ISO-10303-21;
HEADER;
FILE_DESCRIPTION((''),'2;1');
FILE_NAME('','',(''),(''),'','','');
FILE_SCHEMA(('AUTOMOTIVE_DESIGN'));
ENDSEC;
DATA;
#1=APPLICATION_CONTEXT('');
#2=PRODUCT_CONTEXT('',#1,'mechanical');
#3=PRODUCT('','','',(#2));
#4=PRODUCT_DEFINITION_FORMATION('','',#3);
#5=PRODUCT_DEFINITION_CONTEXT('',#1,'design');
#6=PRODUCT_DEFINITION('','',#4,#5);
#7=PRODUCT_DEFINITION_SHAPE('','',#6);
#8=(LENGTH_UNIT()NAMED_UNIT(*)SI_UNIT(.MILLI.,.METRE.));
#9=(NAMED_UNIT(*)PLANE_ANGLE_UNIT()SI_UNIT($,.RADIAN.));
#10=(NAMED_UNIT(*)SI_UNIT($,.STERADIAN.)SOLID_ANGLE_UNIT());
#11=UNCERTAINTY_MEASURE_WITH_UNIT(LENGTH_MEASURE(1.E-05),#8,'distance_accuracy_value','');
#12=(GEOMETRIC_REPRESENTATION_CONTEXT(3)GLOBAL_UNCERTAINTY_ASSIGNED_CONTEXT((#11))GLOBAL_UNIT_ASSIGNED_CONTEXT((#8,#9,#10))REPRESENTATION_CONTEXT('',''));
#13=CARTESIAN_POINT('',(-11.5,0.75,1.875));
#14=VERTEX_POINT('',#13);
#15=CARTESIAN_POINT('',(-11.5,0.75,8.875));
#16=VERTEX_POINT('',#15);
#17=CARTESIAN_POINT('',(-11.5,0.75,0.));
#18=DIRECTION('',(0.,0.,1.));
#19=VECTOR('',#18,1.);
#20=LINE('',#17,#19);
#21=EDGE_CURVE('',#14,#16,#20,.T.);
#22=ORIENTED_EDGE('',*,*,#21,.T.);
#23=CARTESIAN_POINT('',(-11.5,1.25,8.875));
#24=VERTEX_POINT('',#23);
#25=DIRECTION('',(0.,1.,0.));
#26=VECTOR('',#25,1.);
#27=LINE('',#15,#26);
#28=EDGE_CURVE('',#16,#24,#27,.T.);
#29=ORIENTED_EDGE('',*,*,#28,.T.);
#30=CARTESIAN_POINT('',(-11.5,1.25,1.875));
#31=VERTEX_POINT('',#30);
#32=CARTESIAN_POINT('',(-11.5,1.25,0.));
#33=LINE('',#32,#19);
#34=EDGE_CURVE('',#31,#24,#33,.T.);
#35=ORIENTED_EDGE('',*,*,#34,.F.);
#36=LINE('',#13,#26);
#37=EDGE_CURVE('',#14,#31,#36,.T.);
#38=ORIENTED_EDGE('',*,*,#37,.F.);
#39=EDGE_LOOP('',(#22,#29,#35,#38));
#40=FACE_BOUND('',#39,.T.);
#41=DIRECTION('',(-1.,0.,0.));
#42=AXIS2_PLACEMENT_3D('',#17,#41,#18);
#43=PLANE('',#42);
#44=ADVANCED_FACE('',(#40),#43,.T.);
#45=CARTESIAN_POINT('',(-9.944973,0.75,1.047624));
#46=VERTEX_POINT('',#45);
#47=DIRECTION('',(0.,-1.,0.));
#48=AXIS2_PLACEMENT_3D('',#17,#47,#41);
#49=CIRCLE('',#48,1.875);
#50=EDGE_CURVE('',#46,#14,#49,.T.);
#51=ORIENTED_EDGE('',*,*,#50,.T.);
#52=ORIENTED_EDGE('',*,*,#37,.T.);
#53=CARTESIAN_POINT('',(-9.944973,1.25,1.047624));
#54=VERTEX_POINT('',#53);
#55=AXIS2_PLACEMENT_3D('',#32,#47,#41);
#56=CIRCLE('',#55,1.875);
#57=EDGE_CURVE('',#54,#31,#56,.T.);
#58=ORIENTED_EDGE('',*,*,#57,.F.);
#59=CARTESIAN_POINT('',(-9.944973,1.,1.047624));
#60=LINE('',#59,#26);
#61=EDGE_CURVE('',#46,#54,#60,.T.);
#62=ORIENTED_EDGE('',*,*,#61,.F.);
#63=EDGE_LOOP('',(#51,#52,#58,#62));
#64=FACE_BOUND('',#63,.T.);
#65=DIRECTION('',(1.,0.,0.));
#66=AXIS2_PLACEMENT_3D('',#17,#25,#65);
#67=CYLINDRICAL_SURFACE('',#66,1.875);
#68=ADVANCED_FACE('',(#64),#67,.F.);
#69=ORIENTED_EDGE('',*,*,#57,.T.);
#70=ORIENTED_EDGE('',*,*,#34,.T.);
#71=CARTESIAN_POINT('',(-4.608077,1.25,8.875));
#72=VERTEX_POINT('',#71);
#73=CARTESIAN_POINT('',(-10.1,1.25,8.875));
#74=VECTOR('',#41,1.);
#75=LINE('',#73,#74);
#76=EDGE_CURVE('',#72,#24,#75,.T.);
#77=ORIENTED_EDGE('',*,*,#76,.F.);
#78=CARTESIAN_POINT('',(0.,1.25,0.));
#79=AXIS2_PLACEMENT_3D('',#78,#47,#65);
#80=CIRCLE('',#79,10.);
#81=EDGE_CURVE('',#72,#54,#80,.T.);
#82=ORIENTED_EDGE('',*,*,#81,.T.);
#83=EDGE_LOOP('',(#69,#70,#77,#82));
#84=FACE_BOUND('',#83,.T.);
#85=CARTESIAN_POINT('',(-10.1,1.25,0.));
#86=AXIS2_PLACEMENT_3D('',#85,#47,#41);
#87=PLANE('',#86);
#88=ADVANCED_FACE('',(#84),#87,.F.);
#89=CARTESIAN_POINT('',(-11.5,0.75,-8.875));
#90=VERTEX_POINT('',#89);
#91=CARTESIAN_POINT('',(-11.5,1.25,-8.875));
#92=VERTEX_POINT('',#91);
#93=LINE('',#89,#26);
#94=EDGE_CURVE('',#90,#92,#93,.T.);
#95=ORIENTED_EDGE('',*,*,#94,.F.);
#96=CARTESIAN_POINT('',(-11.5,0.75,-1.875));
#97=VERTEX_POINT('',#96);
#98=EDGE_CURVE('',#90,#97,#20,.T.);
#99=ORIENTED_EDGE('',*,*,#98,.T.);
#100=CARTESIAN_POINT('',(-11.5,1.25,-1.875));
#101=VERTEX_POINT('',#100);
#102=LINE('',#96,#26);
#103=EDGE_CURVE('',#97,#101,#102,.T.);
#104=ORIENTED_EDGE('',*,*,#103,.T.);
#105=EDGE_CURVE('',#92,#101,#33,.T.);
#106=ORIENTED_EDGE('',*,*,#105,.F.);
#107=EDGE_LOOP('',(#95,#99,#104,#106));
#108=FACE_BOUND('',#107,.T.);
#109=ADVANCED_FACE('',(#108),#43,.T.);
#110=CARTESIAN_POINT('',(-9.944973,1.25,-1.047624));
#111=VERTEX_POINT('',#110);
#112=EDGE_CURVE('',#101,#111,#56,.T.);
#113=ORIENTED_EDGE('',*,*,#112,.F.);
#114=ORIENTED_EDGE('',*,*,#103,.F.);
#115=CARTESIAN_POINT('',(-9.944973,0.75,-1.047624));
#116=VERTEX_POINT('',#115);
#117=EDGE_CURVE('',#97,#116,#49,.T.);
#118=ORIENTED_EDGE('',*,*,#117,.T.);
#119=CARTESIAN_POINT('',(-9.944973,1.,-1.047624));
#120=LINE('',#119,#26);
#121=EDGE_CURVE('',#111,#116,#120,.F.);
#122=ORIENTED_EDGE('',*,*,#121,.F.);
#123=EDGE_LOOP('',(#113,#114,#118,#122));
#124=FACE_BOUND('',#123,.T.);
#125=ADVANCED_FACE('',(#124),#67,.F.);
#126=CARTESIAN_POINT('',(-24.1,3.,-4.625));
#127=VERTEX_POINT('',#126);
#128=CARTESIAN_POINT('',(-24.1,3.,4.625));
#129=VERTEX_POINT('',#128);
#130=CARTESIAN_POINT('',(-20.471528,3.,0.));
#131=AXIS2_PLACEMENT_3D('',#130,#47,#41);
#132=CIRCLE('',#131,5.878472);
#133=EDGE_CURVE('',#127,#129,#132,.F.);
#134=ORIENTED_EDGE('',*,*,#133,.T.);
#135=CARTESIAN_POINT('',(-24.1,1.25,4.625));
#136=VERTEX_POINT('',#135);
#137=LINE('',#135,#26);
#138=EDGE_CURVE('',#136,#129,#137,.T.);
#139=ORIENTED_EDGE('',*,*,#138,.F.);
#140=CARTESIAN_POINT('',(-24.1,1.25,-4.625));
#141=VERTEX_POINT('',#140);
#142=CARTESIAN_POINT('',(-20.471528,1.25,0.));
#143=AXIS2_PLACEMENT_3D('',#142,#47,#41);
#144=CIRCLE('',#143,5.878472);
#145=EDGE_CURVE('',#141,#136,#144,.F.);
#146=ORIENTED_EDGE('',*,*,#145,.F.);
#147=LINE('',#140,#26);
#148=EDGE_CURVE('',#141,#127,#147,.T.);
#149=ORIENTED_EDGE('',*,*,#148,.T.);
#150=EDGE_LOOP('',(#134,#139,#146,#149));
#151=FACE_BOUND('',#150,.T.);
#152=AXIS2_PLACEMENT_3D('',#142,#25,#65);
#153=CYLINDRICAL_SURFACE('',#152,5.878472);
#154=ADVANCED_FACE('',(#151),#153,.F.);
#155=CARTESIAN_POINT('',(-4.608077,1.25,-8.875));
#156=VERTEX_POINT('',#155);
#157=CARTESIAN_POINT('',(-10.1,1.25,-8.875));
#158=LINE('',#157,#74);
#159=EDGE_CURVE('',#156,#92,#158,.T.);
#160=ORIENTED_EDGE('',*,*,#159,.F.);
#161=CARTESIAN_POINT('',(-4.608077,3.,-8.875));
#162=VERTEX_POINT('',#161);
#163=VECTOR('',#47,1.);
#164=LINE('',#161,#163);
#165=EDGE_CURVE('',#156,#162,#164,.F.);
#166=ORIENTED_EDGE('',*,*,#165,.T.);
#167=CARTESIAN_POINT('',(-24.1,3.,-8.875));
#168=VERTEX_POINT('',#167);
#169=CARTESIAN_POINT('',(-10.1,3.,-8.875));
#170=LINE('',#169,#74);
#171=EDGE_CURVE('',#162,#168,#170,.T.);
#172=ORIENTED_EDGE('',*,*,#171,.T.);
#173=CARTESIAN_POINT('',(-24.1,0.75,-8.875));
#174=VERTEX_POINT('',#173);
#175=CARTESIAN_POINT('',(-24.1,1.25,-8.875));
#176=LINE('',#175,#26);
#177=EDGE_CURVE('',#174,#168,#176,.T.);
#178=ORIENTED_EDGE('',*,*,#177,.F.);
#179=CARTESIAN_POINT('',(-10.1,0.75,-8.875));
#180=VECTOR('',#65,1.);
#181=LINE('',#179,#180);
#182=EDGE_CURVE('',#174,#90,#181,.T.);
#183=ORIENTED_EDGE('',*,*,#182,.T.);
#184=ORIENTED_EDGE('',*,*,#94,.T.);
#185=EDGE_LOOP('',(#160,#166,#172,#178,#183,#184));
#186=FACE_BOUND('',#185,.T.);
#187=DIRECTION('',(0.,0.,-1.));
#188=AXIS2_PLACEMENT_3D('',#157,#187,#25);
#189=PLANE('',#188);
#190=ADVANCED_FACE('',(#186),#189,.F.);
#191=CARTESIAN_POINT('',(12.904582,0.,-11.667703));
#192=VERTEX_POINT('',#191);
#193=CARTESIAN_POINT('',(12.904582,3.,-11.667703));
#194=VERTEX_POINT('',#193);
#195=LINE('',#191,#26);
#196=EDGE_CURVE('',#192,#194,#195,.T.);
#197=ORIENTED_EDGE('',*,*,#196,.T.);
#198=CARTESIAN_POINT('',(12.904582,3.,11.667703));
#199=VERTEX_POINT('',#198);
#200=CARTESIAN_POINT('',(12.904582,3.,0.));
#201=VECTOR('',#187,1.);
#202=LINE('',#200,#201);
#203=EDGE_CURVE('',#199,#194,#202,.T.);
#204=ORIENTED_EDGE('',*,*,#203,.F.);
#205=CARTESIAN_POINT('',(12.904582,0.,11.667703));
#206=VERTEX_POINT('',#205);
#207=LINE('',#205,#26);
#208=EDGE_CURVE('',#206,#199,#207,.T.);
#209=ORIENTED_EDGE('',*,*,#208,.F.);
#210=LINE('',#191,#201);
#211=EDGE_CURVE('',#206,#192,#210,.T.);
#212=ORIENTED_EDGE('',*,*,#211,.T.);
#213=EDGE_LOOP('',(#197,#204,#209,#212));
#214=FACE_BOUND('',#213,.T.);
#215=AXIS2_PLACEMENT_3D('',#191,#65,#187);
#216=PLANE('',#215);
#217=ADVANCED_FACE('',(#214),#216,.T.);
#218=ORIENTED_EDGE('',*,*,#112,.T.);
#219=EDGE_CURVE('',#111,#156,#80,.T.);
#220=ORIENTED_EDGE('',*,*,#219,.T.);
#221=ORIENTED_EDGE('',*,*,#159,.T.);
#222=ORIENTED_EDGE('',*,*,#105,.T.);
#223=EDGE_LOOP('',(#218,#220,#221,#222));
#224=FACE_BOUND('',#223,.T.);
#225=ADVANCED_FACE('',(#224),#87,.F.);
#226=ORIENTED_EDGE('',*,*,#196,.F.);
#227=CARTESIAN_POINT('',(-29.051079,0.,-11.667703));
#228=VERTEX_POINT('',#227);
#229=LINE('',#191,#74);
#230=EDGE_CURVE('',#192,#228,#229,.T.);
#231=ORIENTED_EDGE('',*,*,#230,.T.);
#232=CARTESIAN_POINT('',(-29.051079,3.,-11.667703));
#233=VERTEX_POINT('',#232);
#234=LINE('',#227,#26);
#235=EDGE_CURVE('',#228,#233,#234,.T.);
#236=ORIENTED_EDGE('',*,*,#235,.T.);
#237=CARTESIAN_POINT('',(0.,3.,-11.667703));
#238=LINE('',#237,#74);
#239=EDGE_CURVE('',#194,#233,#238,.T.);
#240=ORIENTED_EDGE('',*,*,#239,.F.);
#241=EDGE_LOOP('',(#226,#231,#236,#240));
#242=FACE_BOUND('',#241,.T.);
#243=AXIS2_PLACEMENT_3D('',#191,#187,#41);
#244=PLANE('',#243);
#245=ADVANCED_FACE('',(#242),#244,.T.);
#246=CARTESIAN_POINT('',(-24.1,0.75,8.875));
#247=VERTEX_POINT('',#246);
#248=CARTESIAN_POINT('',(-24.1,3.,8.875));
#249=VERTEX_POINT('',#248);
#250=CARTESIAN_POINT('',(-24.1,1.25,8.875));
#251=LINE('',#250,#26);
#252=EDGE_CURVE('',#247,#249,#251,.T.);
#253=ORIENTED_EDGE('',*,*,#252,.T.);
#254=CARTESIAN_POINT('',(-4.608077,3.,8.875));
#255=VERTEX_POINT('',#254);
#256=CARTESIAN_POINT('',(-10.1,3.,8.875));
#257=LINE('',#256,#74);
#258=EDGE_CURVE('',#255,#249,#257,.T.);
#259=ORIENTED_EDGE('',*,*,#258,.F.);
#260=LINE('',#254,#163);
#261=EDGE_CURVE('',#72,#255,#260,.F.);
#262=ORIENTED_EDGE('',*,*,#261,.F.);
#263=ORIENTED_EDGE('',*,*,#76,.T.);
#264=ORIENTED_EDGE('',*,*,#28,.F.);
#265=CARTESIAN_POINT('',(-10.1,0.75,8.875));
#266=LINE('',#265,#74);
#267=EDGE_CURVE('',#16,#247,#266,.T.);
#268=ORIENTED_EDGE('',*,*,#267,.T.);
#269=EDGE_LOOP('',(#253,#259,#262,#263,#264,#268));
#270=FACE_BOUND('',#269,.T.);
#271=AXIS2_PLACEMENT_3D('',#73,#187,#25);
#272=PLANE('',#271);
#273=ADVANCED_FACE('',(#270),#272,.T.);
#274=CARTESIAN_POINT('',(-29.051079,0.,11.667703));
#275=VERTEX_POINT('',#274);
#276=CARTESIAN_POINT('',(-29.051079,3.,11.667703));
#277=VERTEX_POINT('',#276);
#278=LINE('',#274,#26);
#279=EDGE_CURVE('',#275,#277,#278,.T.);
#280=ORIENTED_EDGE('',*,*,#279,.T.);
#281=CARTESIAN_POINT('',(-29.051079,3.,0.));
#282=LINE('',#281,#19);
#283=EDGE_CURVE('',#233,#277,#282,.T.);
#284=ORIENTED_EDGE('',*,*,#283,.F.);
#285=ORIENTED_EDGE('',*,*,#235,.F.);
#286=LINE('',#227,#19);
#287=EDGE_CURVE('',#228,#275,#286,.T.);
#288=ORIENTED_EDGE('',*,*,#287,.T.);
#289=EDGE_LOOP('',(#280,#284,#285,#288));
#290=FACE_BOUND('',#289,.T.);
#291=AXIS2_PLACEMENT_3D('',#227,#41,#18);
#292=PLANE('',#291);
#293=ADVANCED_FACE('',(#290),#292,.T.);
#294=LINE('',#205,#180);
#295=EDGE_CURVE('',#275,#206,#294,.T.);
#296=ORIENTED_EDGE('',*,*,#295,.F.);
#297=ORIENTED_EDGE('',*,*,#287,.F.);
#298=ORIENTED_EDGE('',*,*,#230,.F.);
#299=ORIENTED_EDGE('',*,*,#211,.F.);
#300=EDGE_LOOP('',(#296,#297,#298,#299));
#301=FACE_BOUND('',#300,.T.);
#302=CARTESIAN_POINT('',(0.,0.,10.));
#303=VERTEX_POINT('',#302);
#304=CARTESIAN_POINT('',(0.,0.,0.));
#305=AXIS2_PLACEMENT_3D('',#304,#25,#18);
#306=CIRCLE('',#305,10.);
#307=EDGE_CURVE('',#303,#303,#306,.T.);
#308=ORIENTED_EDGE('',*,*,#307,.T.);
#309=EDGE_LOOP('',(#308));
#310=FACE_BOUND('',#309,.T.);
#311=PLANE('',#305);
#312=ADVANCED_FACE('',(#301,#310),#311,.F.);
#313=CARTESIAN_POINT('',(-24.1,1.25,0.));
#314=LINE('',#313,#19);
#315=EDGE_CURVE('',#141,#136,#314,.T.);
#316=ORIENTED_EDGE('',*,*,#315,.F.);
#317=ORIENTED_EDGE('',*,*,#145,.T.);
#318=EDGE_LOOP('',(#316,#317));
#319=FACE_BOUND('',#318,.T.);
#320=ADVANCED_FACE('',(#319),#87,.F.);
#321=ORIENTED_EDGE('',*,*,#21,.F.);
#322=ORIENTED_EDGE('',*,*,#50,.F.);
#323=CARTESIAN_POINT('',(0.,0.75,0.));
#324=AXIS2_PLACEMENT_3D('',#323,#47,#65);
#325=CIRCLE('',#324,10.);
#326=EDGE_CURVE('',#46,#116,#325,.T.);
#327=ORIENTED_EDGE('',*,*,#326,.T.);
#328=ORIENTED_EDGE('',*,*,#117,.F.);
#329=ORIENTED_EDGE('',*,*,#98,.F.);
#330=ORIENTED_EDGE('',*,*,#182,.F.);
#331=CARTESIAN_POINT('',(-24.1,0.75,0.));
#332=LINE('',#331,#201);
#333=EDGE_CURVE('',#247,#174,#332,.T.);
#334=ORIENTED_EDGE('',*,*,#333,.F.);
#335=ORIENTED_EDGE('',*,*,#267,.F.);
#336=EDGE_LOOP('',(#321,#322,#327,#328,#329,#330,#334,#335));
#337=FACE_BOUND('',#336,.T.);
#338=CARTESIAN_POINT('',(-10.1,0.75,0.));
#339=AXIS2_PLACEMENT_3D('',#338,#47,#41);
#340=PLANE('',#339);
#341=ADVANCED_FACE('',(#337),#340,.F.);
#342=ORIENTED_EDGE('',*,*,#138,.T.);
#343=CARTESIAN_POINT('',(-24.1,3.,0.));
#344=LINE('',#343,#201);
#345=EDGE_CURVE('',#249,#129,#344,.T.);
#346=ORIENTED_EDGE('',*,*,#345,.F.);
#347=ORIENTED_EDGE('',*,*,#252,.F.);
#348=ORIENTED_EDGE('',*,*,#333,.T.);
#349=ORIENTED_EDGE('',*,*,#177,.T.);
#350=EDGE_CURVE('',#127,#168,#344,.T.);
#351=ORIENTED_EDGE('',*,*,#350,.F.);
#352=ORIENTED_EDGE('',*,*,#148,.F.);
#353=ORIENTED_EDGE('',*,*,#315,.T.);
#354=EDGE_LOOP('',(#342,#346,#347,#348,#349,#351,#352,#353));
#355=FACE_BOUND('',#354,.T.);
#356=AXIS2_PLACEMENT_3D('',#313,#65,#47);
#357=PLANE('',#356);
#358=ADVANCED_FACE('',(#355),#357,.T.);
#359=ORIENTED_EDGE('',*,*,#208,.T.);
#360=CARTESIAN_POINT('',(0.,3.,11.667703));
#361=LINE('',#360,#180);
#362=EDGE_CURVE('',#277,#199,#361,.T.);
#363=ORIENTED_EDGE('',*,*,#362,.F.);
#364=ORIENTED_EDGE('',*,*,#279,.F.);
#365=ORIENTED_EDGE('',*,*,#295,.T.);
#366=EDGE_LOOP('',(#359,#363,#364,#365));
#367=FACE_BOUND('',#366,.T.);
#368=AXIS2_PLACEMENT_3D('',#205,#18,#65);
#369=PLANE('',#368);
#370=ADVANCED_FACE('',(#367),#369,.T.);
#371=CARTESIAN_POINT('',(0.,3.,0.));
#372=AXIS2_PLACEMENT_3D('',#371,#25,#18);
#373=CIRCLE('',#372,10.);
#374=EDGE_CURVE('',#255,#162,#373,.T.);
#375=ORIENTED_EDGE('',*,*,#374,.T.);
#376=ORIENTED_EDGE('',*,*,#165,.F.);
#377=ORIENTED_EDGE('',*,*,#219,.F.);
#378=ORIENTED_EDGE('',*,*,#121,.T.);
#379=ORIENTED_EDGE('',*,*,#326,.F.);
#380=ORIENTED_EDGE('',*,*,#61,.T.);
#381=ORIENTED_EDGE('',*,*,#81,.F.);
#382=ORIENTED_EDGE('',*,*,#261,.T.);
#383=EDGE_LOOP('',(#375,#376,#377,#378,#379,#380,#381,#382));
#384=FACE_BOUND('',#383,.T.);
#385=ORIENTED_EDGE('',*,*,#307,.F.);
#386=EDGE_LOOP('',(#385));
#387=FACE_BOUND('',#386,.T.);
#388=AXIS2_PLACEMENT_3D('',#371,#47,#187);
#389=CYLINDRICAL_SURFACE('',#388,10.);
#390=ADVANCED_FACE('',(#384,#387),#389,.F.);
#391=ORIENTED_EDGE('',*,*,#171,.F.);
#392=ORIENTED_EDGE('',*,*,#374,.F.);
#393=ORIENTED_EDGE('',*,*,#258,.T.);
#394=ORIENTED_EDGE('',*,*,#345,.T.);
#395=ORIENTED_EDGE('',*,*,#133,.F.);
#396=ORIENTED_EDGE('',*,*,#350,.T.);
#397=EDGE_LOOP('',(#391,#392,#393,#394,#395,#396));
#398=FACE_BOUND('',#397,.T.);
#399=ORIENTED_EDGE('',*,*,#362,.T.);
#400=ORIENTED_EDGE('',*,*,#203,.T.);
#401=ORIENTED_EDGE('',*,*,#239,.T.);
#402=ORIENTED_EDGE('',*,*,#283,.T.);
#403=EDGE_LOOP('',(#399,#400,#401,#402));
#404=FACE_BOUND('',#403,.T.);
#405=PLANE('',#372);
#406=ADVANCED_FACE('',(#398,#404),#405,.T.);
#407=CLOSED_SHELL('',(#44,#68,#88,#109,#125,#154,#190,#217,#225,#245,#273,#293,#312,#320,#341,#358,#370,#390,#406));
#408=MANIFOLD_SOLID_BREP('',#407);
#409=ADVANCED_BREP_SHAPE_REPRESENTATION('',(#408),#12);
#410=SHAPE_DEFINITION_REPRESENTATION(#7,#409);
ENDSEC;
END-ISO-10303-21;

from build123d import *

# Parameters (mm, degrees)
SKETCH1_R               = 50
SKETCH1_R_2             = 10
BOSS_EXTRUDE1_DEPTH     = 3
BOSS_EXTRUDE2_DEPTH     = 2.5
CAVITY2_START           = 0.75
CAVITY2_DEPTH           = 2.25
CAVITY2_START_2         = 1.25
CAVITY2_2_DEPTH         = 1.75
FILLET1_R               = 0.5
FILLET2_R               = 7
CUT_EXTRUDE2_DEPTH      = 76.690157881
CUT_EXTRUDE2_DEPTH_BACK = 76.690157881
SKETCH3_R               = 50
SKETCH3_W               = 41.955661048
SKETCH3_H               = 23.335406012


# Read off the part's stored shape, not the designer's step: Cavity2
with BuildPart() as part:
    # Sketch1 → Boss-Extrude1 (new body)
    with BuildSketch(Plane(origin=(0, 0, 0), x_dir=(1, 0, 0), z_dir=(0, 1, 0))):
        with Locations(Location((0, 0, 0), (0, 0, 270))):
            Circle(SKETCH1_R)
        with Locations(Location((0, 0, 0), (0, 0, 270))):
            Circle(SKETCH1_R_2, mode=Mode.SUBTRACT)
    extrude(amount=BOSS_EXTRUDE1_DEPTH)

    # Sketch2 → Boss-Extrude2 (add, symmetric)
    with BuildSketch(Plane.XY.offset(-25)):
        Polygon((-17.5, 3), (-10.5, 3), (-10.5, 23), (30.5, 23), (30.5, 3), (37.5, 3), (37.5, 30), (-17.5, 30), align=None)
    extrude(amount=BOSS_EXTRUDE2_DEPTH, both=True)

    # Cavity2 outline → Cavity2 (cut)
    with BuildSketch(Plane(origin=(0, 0, 0), x_dir=(1, 0, 0), z_dir=(0, 1, 0)).offset(CAVITY2_START)):
        with BuildLine():
            ThreePointArc((-9.944972826, -1.047623734), (-10, 0), (-9.944972826, 1.047623734))
            ThreePointArc((-9.944972826, 1.047623734), (-10.619281402, 1.655282378), (-11.5, 1.875))
            Line((-11.5, 1.875), (-11.5, 8.875))
            Line((-11.5, 8.875), (-24.1, 8.875))
            Line((-24.1, 8.875), (-24.1, -8.875))
            Line((-24.1, -8.875), (-11.5, -8.875))
            Line((-11.5, -8.875), (-11.5, -1.875))
            ThreePointArc((-11.5, -1.875), (-10.619281402, -1.655282378), (-9.944972826, -1.047623734))
        make_face()
    extrude(amount=CAVITY2_DEPTH, mode=Mode.SUBTRACT)

    # Cavity2 2 outline → Cavity2 2 (cut)
    with BuildSketch(Plane(origin=(0, 0, 0), x_dir=(1, 0, 0), z_dir=(0, 1, 0)).offset(CAVITY2_START_2)):
        with BuildLine():
            ThreePointArc((-11.5, 1.875), (-10.619281402, 1.655282378), (-9.944972826, 1.047623734))
            ThreePointArc((-9.944972826, 1.047623734), (-8.262249735, 5.633402996), (-4.608077148, 8.875))
            Line((-4.608077148, 8.875), (-11.5, 8.875))
            Line((-11.5, 8.875), (-11.5, 1.875))
        make_face()
        with BuildLine():
            ThreePointArc((-4.608077148, -8.875), (-8.262249735, -5.633402996), (-9.944972826, -1.047623734))
            ThreePointArc((-9.944972826, -1.047623734), (-10.619281402, -1.655282378), (-11.5, -1.875))
            Line((-11.5, -1.875), (-11.5, -8.875))
            Line((-11.5, -8.875), (-4.608077148, -8.875))
        make_face()
        with BuildLine():
            Line((-24.1, -4.625), (-24.1, 4.625))
            ThreePointArc((-24.1, 4.625), (-26.35, 0), (-24.1, -4.625))
        make_face()
    extrude(amount=CAVITY2_2_DEPTH, mode=Mode.SUBTRACT)

    # Fillet1
    fillet1_edges = [part.edges().sort_by_distance(p)[0] for p in [
        (-14, 3, -22.5),
        (-17.5, 3, -25),
        (34, 3, -27.5),
        (37.5, 3, -25),
        (-14, 3, -27.5),
        (34, 3, -22.5),
    ]]
    fillet(fillet1_edges, radius=FILLET1_R)

    # Fillet2
    fillet2_edges = [part.edges().sort_by_distance(p)[0] for p in [
        (-17.5, 30, -25),
        (37.5, 30, -25),
    ]]
    fillet(fillet2_edges, radius=FILLET2_R)

    # Sketch3 → Cut-Extrude2 (cut, two sides: drawn at the far end of the back side and taken through both)
    with BuildSketch(Plane(origin=(0, 3, 0), x_dir=(1, 0, 0), z_dir=(0, 1, 0)).offset(-CUT_EXTRUDE2_DEPTH_BACK)):
        Circle(SKETCH3_R)
        with Locations((-8.073248433, 0)):
            Rectangle(SKETCH3_W, SKETCH3_H, mode=Mode.SUBTRACT)
    extrude(amount=CUT_EXTRUDE2_DEPTH + CUT_EXTRUDE2_DEPTH_BACK, mode=Mode.SUBTRACT)


solid = part.part
